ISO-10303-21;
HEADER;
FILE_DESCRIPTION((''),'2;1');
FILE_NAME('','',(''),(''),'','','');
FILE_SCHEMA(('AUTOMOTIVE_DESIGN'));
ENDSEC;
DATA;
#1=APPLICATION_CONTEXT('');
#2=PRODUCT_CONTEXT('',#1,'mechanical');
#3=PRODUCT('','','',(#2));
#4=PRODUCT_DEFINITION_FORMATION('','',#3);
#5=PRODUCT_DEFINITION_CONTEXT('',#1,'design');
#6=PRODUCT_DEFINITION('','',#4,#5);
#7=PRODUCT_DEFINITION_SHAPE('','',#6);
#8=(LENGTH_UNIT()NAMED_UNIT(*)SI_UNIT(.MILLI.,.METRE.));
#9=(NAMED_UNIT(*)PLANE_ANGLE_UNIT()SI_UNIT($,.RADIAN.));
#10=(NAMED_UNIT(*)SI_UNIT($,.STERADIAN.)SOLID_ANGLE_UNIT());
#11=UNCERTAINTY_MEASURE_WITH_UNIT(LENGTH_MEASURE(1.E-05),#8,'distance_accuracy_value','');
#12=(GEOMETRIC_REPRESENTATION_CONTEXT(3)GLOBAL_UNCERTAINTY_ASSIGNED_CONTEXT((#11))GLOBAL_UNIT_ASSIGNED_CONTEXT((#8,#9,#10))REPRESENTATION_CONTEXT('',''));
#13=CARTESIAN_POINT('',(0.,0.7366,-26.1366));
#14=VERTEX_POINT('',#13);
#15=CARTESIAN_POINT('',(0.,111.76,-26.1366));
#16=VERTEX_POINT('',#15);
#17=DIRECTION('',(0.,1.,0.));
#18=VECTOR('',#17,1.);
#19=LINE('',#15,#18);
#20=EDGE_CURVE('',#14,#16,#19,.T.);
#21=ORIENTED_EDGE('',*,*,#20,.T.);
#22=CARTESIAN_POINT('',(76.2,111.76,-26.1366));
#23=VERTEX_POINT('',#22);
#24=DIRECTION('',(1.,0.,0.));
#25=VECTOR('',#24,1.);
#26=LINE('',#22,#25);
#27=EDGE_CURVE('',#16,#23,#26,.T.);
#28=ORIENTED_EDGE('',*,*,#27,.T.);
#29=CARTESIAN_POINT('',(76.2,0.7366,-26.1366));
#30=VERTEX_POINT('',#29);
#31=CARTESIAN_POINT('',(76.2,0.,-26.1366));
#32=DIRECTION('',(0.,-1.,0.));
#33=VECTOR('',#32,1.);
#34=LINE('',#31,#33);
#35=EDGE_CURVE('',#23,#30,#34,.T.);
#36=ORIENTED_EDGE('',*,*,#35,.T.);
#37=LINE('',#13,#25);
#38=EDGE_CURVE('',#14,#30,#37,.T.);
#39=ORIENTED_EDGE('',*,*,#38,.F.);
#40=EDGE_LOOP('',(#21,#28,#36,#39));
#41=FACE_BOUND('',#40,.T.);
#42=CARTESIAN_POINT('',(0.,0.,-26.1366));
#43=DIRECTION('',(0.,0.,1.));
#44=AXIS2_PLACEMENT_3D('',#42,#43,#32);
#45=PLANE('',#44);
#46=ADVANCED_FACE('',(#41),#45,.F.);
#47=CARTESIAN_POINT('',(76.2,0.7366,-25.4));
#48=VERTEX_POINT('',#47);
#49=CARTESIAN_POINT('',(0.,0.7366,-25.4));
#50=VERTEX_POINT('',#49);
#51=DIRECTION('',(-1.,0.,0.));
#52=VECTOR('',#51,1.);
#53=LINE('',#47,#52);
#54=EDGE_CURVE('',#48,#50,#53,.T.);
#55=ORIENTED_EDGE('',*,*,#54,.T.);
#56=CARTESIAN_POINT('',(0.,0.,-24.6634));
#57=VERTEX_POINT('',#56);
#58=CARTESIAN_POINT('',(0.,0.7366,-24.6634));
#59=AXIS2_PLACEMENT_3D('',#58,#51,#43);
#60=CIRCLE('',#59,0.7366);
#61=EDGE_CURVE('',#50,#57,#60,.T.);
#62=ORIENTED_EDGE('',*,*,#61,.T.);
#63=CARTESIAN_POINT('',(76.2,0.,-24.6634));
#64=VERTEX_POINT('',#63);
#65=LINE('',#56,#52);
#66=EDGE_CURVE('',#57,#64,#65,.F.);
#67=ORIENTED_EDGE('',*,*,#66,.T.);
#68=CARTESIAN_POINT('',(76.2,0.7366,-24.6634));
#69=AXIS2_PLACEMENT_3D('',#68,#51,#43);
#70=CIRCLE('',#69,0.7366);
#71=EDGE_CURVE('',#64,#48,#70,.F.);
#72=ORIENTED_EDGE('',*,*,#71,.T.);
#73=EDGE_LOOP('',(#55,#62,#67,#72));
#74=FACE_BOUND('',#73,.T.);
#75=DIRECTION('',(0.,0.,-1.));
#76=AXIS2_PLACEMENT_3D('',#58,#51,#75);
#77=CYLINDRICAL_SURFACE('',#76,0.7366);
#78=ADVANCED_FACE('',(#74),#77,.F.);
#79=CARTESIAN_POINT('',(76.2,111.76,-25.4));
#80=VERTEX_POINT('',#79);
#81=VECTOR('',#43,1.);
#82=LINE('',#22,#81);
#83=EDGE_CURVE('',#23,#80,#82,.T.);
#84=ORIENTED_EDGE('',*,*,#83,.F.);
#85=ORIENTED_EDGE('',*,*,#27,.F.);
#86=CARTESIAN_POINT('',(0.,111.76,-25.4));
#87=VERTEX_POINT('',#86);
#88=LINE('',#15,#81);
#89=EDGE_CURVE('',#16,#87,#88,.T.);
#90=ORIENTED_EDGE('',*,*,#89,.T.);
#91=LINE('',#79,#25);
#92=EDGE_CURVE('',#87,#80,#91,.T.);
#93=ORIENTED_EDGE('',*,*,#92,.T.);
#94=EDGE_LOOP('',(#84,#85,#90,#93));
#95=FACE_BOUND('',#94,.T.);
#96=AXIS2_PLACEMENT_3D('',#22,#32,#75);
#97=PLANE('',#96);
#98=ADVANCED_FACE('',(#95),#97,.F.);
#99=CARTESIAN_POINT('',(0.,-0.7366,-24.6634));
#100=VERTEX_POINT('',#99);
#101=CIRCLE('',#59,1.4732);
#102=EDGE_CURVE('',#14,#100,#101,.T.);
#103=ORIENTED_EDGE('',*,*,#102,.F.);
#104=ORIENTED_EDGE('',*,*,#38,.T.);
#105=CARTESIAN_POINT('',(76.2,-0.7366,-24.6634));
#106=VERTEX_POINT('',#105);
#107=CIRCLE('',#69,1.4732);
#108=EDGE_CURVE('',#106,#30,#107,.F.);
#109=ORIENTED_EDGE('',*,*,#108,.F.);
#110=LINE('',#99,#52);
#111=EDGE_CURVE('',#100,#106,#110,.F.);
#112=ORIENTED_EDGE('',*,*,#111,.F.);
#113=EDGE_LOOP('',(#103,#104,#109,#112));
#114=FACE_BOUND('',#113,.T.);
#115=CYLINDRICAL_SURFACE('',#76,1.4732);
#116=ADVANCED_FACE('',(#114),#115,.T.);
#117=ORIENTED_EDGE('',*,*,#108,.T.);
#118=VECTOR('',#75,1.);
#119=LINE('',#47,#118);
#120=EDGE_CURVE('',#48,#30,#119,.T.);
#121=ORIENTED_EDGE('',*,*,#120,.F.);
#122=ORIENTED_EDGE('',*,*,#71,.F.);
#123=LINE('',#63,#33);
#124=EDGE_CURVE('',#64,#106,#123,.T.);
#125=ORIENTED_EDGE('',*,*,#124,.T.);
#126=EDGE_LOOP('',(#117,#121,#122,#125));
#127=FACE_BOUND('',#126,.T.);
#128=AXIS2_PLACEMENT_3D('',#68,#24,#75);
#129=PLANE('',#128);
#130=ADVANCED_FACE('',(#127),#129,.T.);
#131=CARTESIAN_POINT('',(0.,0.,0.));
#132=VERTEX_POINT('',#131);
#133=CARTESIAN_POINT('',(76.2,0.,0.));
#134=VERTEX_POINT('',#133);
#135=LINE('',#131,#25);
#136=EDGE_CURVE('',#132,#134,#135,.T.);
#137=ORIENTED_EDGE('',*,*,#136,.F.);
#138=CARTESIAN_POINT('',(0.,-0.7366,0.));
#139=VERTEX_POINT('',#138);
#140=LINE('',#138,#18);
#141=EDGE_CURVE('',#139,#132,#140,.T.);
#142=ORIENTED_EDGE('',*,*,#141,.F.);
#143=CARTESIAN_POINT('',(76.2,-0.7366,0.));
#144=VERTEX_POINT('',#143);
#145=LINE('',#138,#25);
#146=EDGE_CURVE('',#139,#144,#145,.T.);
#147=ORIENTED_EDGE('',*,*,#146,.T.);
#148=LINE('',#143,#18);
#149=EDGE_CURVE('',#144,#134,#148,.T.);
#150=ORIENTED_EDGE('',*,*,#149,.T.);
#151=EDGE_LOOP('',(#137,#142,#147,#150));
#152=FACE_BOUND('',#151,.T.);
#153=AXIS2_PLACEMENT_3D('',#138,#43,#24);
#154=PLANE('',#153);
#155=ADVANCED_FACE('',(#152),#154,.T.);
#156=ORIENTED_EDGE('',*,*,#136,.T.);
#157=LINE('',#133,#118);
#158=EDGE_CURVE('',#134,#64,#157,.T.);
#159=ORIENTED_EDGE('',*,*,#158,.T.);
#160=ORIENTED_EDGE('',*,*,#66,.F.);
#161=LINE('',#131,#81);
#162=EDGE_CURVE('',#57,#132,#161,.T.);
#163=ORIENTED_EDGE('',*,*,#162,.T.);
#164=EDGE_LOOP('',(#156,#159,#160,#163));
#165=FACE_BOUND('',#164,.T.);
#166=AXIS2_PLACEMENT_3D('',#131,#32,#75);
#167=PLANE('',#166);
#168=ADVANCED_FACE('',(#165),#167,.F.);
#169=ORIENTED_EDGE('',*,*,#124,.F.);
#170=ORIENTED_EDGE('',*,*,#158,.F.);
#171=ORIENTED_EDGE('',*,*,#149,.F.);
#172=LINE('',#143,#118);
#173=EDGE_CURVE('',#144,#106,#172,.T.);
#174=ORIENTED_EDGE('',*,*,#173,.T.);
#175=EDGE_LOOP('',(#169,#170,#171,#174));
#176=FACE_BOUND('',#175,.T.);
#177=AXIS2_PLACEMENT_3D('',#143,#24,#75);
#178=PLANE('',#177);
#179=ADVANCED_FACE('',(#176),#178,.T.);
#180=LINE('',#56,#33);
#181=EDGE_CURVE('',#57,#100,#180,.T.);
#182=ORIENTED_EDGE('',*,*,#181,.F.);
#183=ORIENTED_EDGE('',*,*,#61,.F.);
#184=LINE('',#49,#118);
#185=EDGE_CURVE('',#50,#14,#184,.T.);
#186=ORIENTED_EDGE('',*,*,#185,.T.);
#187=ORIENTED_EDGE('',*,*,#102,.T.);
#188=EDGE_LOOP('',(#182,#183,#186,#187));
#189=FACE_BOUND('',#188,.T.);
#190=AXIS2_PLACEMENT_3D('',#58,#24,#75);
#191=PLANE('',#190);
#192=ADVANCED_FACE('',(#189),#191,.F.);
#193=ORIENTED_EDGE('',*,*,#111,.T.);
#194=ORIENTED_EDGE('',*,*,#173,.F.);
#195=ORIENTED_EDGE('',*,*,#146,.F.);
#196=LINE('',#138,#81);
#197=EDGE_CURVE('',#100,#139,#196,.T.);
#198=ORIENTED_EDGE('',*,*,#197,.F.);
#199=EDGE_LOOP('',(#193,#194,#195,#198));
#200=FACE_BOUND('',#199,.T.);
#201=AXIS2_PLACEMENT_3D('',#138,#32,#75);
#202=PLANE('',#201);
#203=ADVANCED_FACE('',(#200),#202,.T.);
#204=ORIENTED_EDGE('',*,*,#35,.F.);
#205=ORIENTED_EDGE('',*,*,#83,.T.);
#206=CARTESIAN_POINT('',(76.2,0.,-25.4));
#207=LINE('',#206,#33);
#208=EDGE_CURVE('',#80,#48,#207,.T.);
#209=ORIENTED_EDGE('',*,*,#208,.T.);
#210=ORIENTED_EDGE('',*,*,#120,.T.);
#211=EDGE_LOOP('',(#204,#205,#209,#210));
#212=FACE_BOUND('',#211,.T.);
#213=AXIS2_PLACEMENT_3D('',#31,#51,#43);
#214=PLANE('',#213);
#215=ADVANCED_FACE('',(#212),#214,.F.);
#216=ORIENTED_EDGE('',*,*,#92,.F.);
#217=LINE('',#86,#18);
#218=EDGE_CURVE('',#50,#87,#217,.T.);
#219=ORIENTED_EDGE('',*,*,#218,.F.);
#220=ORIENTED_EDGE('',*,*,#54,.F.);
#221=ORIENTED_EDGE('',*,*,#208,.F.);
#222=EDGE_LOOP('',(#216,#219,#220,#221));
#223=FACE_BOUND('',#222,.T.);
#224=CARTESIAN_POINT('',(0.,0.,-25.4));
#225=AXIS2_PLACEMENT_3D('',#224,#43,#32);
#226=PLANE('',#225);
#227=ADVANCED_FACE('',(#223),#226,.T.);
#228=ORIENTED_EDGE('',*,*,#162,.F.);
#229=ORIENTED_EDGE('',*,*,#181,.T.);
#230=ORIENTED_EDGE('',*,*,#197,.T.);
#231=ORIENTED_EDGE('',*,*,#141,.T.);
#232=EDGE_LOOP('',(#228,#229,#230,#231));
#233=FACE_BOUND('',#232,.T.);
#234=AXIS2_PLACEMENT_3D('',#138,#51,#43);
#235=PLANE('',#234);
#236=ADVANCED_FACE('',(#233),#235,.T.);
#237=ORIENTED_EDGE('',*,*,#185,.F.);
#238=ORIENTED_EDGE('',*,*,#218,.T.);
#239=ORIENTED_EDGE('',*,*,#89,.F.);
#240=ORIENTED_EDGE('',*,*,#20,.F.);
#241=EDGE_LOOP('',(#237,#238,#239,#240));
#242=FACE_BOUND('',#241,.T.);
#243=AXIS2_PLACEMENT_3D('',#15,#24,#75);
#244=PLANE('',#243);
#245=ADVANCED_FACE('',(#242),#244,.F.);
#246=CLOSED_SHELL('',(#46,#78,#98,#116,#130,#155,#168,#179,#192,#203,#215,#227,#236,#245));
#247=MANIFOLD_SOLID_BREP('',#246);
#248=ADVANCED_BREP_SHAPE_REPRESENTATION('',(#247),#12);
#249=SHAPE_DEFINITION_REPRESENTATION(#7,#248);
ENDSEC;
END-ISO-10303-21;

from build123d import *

# Parameters (mm, degrees)
SKETCH1_W                    = 76.2
SKETCH1_H                    = 25.4
BASE_FLANGE1_DEPTH           = 0.7366
EDGE_FLANGE1_STRIP_W         = 4.4196
EDGE_FLANGE1_STRIP_H         = 0.7366
EDGE_FLANGE1_STRIP_CUT_DEPTH = 76.2
EDGE_FLANGE1_DEPTH           = 76.2


# Sheet-metal steps are written as plain solids
with BuildPart() as part:
    # Sketch1 → Base-Flange1 (new body)
    with BuildSketch(Plane(origin=(0, 0, 0), x_dir=(1, 0, 0), z_dir=(0, 1, 0))):
        with Locations((38.1, 12.7)):
            Rectangle(SKETCH1_W, SKETCH1_H)
    extrude(amount=-BASE_FLANGE1_DEPTH)

    # Edge-Flange1 strip (across the edge) → Edge-Flange1 strip cut (cut)
    with BuildSketch(Plane(origin=(76.2, 0, -25.4), x_dir=(0, 0, 1), z_dir=(-1, 0, 0))):
        with Locations((-1.4732, -0.3683)):
            Rectangle(EDGE_FLANGE1_STRIP_W, EDGE_FLANGE1_STRIP_H)
    extrude(amount=EDGE_FLANGE1_STRIP_CUT_DEPTH, mode=Mode.SUBTRACT)

    # Edge-Flange1 section (across the edge) → Edge-Flange1 (add)
    with BuildSketch(Plane(origin=(76.2, 0, -25.4), x_dir=(0, 0, 1), z_dir=(-1, 0, 0))):
        with BuildLine():
            Line((-0.7366, 0.7366), (-0.7366, 111.76))
            Line((-0.7366, 111.76), (0, 111.76))
            Line((0, 111.76), (0, 0.7366))
            ThreePointArc((0, 0.7366), (0.215745145, 0.215745145), (0.7366, 0))
            Line((0.7366, 0), (0.7366, -0.7366))
            ThreePointArc((0.7366, -0.7366), (-0.30510971, -0.30510971), (-0.7366, 0.7366))
        make_face()
    extrude(amount=EDGE_FLANGE1_DEPTH)


solid = part.part
